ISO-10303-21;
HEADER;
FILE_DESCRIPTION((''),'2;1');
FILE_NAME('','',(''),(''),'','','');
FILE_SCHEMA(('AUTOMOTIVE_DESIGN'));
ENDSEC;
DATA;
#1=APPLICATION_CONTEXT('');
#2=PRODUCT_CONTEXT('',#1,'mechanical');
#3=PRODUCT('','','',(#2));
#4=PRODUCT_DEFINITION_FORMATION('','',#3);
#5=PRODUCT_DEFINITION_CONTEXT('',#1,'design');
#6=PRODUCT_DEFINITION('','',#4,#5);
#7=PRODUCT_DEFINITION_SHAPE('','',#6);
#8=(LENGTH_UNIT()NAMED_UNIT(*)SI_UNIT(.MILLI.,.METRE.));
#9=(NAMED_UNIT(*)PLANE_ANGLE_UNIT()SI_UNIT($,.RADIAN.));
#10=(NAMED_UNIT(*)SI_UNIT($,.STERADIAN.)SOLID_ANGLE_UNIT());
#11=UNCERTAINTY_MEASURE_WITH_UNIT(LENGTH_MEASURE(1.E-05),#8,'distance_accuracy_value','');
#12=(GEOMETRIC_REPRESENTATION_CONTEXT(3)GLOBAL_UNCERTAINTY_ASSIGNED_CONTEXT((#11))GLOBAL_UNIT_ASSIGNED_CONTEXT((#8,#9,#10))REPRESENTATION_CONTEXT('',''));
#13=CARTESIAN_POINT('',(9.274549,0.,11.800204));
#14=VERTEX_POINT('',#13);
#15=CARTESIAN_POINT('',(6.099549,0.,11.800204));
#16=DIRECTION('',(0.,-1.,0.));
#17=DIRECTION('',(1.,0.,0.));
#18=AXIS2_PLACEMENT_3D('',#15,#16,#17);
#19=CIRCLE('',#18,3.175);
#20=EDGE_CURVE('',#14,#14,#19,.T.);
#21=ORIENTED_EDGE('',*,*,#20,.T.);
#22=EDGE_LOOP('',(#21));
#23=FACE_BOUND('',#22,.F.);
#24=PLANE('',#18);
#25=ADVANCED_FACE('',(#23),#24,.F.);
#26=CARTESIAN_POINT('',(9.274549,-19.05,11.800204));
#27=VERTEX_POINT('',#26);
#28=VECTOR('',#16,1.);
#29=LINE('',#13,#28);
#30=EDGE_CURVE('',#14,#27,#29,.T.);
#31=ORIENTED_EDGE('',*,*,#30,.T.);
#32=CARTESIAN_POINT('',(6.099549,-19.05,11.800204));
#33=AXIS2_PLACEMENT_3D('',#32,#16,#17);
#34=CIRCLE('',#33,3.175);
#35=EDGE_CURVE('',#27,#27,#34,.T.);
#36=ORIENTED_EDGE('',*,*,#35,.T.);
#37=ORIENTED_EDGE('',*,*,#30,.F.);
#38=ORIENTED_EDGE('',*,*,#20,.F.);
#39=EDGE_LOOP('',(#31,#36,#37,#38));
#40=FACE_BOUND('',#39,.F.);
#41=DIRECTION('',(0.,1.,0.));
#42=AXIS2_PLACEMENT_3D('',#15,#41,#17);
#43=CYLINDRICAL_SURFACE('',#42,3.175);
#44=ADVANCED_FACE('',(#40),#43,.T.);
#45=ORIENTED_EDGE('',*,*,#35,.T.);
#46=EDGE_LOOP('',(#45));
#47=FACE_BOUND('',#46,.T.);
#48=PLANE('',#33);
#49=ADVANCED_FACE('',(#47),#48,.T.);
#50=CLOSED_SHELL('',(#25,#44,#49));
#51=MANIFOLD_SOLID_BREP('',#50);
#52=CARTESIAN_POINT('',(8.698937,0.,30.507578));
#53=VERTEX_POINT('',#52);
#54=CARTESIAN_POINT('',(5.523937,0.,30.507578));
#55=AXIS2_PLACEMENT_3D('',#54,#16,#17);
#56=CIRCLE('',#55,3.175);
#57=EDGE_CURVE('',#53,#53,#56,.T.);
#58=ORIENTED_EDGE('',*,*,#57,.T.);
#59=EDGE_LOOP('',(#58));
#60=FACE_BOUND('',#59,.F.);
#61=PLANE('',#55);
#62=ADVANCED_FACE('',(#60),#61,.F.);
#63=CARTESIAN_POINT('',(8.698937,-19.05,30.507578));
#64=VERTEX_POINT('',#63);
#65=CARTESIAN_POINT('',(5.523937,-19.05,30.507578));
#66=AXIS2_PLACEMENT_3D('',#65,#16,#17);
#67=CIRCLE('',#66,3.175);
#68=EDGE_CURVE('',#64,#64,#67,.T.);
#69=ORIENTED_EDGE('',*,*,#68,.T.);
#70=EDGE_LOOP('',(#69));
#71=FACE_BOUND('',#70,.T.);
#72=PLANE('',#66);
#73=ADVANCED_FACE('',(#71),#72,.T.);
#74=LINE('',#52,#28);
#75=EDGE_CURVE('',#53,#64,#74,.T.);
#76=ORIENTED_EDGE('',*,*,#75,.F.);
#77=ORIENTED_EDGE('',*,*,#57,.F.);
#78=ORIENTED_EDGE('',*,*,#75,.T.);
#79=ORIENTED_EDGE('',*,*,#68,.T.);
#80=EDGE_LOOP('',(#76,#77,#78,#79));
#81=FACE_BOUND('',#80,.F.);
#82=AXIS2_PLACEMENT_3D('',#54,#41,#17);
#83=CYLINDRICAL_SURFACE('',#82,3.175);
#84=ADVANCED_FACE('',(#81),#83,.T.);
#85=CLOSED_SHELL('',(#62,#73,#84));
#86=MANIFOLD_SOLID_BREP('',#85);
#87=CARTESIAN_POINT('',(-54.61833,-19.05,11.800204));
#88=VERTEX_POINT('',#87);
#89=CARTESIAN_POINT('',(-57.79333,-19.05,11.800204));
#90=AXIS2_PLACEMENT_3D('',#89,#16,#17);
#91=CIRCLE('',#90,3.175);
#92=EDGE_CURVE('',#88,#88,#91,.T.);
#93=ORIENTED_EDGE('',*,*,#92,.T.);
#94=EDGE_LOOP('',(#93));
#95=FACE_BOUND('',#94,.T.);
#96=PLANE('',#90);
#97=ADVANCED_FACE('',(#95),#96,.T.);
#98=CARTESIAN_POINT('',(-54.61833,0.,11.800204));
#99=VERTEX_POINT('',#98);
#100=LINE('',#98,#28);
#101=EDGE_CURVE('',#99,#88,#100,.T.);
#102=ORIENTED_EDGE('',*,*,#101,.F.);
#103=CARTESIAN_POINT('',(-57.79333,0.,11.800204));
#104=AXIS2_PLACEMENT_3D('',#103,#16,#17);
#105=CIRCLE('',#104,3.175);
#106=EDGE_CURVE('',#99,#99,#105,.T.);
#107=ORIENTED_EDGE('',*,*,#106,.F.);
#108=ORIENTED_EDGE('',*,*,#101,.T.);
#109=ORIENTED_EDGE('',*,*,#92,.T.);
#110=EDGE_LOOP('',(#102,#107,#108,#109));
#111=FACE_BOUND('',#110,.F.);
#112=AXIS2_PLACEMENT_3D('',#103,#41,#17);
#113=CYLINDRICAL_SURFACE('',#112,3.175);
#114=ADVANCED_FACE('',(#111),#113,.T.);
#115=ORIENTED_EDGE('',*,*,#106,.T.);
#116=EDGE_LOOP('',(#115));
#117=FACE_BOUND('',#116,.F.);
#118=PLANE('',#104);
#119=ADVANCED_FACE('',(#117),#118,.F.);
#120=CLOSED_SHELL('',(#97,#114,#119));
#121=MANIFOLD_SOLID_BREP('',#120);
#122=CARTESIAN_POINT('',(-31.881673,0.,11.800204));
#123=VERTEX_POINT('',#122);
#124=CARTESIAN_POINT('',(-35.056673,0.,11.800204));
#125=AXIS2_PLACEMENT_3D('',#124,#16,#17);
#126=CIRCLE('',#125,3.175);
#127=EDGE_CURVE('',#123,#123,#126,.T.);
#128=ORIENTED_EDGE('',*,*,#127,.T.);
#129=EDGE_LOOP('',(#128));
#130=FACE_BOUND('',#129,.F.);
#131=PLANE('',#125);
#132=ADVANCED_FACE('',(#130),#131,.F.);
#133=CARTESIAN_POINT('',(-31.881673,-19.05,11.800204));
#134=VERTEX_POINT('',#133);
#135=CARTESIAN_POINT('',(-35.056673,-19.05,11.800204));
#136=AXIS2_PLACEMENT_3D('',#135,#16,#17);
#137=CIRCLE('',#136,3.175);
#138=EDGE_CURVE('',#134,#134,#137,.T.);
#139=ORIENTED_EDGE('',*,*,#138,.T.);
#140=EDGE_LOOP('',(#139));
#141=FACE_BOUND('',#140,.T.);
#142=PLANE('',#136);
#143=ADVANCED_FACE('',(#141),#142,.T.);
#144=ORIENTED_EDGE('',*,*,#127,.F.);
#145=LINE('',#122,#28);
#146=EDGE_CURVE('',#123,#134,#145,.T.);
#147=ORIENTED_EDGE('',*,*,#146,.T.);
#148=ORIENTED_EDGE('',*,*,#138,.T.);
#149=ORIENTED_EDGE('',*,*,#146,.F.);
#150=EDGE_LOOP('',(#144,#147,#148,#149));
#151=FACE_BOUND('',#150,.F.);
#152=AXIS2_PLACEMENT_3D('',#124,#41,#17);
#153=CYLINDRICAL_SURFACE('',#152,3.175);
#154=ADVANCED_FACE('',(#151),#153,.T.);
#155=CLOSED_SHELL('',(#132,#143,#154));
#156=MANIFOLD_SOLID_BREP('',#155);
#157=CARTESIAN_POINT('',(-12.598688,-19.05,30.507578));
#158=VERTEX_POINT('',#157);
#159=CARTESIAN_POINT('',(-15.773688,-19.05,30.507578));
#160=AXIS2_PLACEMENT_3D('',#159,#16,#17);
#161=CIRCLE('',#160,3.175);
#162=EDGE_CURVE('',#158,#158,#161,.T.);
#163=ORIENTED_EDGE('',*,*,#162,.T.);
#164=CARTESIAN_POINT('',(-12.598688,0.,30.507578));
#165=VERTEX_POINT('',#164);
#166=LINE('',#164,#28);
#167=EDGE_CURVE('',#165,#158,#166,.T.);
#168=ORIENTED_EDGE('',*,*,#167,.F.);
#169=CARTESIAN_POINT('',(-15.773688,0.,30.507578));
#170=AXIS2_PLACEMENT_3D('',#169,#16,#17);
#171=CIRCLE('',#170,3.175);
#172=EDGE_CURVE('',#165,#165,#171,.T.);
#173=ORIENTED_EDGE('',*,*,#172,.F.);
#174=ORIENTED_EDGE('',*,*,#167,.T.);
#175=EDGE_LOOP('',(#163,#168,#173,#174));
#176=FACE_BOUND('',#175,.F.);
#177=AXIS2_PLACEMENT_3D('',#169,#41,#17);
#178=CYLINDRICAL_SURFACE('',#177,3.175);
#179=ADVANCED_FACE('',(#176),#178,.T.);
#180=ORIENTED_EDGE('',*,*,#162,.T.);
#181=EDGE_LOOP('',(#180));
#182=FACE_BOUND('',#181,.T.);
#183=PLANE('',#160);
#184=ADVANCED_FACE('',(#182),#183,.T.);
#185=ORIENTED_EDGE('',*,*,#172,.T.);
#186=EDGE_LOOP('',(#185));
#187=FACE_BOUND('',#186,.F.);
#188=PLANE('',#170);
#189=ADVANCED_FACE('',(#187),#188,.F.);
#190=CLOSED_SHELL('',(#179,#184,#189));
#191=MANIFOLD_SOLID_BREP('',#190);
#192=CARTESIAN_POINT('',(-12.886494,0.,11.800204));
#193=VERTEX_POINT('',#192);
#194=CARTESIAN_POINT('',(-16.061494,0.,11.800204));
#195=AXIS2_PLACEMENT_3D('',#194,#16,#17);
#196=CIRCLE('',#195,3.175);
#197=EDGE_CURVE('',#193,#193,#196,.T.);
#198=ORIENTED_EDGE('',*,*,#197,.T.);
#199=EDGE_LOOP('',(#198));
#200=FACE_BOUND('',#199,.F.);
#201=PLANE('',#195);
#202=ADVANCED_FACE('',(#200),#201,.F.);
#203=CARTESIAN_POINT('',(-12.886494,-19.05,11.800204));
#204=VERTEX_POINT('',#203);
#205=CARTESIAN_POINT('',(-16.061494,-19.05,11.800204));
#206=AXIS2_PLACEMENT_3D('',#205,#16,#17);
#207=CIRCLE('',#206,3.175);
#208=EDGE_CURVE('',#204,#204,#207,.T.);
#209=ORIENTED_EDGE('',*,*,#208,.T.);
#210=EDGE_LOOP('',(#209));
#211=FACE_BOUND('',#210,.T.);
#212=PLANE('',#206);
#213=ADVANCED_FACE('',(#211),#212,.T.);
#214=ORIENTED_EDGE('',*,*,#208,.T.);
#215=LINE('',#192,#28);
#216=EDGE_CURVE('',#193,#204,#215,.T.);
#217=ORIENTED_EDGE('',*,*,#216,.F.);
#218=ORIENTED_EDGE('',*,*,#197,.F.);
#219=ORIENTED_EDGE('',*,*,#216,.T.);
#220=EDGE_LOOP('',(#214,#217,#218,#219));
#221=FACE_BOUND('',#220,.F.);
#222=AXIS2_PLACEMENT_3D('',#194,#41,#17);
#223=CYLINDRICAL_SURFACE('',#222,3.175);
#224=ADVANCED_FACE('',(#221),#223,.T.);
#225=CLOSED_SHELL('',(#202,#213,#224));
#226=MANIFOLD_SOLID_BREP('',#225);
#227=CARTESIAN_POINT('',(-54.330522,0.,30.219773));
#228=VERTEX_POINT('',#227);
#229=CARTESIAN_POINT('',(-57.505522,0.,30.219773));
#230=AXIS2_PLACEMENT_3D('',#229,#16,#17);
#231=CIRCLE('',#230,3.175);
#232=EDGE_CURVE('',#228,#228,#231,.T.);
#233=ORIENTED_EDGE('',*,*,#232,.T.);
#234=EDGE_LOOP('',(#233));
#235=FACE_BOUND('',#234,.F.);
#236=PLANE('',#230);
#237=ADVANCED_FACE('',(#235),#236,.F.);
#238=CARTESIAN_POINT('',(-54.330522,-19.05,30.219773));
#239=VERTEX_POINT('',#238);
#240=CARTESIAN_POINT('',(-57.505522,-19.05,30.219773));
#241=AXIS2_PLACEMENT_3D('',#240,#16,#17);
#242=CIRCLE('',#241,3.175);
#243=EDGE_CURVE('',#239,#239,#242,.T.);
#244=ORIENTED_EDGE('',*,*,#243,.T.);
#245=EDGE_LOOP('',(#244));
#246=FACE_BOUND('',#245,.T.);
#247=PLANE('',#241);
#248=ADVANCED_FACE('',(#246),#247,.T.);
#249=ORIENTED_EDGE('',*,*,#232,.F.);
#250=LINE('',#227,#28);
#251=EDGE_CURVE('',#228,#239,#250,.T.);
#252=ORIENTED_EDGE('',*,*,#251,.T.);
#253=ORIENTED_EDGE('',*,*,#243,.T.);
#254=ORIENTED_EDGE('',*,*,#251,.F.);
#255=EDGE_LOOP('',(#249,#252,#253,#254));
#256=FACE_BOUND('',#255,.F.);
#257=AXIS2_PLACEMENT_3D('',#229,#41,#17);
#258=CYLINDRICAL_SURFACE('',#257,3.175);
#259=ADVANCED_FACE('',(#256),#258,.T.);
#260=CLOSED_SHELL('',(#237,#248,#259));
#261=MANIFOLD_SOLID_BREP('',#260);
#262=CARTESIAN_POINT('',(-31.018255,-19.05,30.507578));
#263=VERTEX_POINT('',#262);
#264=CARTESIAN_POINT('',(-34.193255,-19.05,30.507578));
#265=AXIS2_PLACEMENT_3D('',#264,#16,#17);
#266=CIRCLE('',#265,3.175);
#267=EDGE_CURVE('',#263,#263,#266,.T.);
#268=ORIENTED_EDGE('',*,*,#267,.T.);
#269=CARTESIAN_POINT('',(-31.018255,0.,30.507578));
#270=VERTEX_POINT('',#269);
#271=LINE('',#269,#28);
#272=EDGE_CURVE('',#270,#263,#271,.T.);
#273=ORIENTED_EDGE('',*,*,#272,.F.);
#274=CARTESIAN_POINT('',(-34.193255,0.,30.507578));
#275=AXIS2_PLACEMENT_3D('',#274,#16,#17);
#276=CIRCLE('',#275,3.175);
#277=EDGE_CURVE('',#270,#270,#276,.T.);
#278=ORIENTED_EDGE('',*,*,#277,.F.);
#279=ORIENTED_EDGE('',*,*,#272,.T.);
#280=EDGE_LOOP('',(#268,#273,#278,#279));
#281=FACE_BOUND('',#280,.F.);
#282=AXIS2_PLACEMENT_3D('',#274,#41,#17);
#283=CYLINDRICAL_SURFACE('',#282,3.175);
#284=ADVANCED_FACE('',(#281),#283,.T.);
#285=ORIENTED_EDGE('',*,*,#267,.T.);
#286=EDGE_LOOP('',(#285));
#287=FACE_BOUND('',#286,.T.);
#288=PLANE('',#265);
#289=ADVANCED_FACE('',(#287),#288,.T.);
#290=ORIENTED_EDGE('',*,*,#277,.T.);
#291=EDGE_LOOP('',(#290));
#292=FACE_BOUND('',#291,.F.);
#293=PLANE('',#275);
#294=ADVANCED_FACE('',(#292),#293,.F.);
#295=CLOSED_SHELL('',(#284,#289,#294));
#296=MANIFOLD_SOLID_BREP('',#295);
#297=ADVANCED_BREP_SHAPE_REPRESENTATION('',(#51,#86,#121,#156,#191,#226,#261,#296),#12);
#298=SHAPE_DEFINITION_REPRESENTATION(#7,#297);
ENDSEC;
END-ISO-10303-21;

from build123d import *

# Parameters (mm, degrees)
F0_R     = 3.175
F1_DEPTH = 19.05


# Not quite as in the source:
# - a length typed as a fraction of an inch, garbled in the dataset ("3 / 203.2 mm" for 3/8 in), is restored


with BuildPart() as f1:
    # F0 (on Front) → F1 (new body)
    with BuildSketch(Plane.XZ):
        with Locations((-57.5055219233, 30.2197728306)):
            Circle(F0_R)
    extrude(amount=F1_DEPTH)


with BuildPart() as f1b:
    # F0 (on Front) → F1, piece 2 (new body)
    with BuildSketch(Plane.XZ):
        with Locations((-34.1932550073, 30.5075775832)):
            Circle(F0_R)
    extrude(amount=F1_DEPTH)


with BuildPart() as f1c:
    # F0 (on Front) → F1, piece 3 (new body)
    with BuildSketch(Plane.XZ):
        with Locations((-15.7736875117, 30.5075775832)):
            Circle(F0_R)
    extrude(amount=F1_DEPTH)


with BuildPart() as f1d:
    # F0 (on Front) → F1, piece 4 (new body)
    with BuildSketch(Plane.XZ):
        with Locations((5.5239372887, 30.5075775832)):
            Circle(F0_R)
    extrude(amount=F1_DEPTH)


with BuildPart() as f1e:
    # F0 (on Front) → F1, piece 5 (new body)
    with BuildSketch(Plane.XZ):
        with Locations((6.0995486565, 11.8002044037)):
            Circle(F0_R)
    extrude(amount=F1_DEPTH)


with BuildPart() as f1f:
    # F0 (on Front) → F1, piece 6 (new body)
    with BuildSketch(Plane.XZ):
        with Locations((-16.0614941269, 11.8002044037)):
            Circle(F0_R)
    extrude(amount=F1_DEPTH)


with BuildPart() as f1g:
    # F0 (on Front) → F1, piece 7 (new body)
    with BuildSketch(Plane.XZ):
        with Locations((-35.0566729903, 11.8002044037)):
            Circle(F0_R)
    extrude(amount=F1_DEPTH)


with BuildPart() as f1h:
    # F0 (on Front) → F1, piece 8 (new body)
    with BuildSketch(Plane.XZ):
        with Locations((-57.7933304012, 11.8002044037)):
            Circle(F0_R)
    extrude(amount=F1_DEPTH)


solid = Compound([f1.part, f1b.part, f1c.part, f1d.part, f1e.part, f1f.part, f1g.part, f1h.part])
